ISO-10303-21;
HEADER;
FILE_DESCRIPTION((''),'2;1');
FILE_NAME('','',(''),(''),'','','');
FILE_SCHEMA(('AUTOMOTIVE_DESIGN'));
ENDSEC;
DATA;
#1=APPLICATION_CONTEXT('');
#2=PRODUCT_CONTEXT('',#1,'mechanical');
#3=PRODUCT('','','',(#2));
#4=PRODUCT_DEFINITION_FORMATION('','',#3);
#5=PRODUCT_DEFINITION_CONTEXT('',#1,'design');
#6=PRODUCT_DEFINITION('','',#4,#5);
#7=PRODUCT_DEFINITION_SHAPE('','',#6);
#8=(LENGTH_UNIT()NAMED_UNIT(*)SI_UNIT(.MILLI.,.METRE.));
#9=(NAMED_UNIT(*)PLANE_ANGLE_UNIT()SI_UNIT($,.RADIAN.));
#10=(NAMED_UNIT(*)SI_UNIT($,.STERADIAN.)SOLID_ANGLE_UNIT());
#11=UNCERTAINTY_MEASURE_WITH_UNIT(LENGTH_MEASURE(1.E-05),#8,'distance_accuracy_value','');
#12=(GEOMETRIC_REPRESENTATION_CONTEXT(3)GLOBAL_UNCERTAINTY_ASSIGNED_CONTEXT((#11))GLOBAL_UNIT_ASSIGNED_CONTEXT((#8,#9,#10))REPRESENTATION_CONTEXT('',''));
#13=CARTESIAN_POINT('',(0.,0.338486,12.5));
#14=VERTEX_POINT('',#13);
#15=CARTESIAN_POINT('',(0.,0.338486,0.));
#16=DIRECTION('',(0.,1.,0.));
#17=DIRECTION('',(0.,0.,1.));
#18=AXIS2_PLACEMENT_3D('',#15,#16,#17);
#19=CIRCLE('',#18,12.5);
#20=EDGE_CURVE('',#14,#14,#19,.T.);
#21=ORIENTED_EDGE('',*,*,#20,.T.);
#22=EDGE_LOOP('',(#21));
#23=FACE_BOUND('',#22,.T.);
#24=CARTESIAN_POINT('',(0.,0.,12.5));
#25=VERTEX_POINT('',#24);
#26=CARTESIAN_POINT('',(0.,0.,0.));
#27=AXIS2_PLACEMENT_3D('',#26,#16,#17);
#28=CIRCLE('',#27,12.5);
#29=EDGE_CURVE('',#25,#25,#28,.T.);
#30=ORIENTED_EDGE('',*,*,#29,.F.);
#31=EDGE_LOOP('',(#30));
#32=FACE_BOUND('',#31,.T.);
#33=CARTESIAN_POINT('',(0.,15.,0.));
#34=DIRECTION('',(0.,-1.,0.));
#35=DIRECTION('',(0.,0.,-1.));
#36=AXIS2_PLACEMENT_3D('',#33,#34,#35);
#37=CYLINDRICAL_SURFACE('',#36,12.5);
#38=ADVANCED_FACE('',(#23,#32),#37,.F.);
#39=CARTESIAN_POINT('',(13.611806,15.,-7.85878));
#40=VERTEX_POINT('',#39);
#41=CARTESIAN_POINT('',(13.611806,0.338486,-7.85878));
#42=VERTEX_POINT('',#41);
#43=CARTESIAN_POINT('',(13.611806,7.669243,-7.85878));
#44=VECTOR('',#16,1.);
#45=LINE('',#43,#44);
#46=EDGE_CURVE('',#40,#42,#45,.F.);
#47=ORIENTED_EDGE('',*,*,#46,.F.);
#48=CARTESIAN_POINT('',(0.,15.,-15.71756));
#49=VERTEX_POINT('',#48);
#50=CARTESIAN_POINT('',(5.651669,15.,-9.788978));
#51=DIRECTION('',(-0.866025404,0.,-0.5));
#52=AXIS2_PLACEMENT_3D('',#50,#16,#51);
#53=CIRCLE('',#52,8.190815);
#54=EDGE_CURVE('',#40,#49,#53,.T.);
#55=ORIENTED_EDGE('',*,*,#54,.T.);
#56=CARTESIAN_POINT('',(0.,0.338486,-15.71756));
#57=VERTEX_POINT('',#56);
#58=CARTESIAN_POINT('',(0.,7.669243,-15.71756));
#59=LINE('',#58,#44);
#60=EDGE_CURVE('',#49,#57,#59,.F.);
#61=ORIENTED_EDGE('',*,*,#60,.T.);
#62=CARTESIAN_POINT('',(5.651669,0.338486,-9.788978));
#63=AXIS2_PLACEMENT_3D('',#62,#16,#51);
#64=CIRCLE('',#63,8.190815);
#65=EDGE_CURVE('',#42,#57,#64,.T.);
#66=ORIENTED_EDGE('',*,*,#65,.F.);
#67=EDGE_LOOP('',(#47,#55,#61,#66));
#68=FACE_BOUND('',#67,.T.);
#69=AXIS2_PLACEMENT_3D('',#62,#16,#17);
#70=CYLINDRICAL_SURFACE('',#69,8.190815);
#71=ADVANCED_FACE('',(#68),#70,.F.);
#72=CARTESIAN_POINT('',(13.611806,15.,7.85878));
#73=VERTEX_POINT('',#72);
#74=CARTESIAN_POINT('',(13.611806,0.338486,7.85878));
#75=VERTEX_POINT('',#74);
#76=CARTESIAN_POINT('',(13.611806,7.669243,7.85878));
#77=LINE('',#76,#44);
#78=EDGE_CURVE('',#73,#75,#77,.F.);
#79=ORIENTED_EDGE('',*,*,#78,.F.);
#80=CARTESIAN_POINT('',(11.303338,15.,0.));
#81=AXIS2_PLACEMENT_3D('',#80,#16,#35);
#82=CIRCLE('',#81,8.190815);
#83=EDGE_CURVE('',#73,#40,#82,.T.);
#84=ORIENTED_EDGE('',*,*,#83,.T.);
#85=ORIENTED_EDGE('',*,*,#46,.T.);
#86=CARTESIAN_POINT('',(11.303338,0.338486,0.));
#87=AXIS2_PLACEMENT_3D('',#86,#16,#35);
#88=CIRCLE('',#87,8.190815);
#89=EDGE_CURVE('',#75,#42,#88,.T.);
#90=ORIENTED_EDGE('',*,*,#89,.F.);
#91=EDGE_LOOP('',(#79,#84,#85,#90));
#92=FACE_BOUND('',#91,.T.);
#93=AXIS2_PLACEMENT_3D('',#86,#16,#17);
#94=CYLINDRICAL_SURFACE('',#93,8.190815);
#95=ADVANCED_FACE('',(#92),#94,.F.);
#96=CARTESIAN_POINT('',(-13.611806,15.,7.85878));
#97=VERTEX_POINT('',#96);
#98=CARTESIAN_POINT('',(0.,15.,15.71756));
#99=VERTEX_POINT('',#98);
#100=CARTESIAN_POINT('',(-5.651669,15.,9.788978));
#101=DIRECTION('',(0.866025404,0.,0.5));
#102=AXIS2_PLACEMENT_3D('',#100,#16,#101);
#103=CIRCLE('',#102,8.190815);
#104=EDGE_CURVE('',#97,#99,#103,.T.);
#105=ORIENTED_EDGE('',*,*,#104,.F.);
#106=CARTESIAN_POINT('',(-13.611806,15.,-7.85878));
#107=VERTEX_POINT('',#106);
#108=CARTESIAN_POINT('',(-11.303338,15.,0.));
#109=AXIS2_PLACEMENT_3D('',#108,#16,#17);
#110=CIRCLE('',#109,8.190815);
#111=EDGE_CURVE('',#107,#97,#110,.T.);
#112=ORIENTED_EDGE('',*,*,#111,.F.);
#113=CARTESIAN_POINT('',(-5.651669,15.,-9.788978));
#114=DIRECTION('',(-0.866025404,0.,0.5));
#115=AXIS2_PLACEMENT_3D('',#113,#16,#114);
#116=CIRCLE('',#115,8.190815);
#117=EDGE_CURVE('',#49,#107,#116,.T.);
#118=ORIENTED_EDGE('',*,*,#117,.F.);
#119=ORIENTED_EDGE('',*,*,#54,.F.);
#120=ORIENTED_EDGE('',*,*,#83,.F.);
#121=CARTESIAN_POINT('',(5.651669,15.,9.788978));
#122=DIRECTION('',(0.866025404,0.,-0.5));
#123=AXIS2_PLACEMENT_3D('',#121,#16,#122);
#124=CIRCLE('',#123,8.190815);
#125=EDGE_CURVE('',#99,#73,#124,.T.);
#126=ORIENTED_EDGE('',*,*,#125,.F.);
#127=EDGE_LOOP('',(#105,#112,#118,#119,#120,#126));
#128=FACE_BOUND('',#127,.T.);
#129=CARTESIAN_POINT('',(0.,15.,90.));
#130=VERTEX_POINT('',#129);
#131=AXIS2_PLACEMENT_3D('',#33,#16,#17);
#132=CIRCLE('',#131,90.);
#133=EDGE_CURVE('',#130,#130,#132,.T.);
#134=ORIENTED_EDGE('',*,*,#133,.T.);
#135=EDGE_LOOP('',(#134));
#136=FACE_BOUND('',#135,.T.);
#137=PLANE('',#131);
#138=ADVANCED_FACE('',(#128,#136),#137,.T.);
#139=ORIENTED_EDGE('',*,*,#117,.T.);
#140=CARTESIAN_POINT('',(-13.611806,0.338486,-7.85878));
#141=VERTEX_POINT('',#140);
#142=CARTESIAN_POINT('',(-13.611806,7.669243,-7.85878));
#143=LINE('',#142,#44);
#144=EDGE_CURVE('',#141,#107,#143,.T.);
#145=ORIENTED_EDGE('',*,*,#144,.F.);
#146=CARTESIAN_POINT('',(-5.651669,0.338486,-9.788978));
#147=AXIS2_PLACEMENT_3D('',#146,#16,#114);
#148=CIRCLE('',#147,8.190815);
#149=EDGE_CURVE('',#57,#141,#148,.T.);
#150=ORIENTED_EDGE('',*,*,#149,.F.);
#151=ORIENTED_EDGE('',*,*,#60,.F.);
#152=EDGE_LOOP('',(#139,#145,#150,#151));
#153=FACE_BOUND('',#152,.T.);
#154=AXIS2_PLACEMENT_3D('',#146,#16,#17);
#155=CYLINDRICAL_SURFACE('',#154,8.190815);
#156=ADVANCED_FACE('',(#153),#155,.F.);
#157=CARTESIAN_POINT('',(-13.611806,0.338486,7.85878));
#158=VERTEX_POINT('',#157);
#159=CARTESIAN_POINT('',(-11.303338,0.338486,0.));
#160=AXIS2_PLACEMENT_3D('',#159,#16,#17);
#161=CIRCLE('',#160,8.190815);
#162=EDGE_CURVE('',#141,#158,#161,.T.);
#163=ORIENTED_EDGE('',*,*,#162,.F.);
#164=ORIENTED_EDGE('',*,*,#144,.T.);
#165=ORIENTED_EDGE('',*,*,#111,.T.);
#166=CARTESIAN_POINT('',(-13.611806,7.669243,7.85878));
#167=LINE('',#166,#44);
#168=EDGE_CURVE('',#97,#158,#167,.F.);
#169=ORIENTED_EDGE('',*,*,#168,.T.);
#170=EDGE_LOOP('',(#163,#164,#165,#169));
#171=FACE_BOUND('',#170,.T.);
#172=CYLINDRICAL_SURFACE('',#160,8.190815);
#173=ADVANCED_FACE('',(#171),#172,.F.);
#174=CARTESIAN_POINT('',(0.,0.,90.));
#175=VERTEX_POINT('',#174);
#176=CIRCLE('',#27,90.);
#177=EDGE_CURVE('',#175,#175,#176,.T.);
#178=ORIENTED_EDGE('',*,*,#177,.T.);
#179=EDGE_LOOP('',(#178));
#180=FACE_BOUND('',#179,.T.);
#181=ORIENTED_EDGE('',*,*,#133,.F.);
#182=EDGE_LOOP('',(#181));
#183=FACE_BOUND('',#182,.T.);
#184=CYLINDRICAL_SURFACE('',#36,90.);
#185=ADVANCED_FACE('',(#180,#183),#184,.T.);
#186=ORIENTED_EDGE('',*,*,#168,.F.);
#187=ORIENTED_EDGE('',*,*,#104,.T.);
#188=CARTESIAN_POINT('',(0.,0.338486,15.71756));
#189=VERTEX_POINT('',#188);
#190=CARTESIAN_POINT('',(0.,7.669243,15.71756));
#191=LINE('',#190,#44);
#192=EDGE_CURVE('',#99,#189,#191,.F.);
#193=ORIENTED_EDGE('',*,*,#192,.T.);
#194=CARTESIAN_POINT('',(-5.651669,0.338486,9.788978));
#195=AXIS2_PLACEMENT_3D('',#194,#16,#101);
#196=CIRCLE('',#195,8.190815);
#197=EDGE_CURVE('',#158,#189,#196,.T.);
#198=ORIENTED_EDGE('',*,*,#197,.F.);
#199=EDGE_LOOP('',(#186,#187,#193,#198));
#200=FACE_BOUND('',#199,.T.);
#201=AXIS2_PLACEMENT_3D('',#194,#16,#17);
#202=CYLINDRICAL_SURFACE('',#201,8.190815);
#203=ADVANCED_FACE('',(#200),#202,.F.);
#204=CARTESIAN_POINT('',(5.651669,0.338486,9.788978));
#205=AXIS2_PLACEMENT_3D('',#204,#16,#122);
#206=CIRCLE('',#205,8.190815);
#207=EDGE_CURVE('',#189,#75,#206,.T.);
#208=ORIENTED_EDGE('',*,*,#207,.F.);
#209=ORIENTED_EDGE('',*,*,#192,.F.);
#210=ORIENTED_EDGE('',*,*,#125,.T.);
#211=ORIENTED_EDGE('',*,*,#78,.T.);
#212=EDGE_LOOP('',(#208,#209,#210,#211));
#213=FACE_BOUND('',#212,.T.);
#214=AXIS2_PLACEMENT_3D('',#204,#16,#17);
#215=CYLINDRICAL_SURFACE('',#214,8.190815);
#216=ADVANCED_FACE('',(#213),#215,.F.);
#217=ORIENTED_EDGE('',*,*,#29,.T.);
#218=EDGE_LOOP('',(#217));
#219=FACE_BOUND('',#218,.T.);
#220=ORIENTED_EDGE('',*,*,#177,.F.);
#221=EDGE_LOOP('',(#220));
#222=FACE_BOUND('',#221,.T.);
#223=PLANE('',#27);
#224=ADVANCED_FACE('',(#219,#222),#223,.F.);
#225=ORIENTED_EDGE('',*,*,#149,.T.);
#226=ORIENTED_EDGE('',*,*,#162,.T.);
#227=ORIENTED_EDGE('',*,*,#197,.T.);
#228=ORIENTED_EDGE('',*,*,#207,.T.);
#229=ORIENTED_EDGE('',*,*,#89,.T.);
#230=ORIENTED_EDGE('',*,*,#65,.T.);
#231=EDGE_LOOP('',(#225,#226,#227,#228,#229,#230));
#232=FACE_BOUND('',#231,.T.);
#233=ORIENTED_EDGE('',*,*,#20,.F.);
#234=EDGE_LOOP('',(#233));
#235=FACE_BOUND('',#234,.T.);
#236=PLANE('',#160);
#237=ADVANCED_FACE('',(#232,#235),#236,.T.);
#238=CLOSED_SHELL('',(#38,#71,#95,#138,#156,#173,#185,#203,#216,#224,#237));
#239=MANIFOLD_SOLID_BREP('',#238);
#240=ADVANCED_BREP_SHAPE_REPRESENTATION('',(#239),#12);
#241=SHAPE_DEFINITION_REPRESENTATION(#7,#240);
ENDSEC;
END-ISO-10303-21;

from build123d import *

# Parameters (mm, degrees)
SKETCH1_R           = 90
BOSS_EXTRUDE1_DEPTH = 15
SKETCH2_R           = 12.5
CUT_EXTRUDE1_DEPTH  = 129.16005618
SKETCH3_R           = 8.190815025
CUT_EXTRUDE2_DEPTH  = 14.66151422
CIRPATTERN1_COUNT   = 6


with BuildPart() as part:
    # Sketch1 → Boss-Extrude1 (new body)
    with BuildSketch(Plane(origin=(0, 0, 0), x_dir=(1, 0, 0), z_dir=(0, 1, 0))):
        Circle(SKETCH1_R)
    extrude(amount=BOSS_EXTRUDE1_DEPTH)

    # Sketch2 → Cut-Extrude1 (cut, through all)
    with BuildSketch(Plane(origin=(0, 0, 0), x_dir=(1, 0, 0), z_dir=(0, 1, 0))):
        Circle(SKETCH2_R)
    extrude(amount=CUT_EXTRUDE1_DEPTH, mode=Mode.SUBTRACT)

    # Sketch3 → Cut-Extrude2 (cut)
    with BuildSketch(Plane(origin=(0, 15, 0), x_dir=(1, 0, 0), z_dir=(0, 1, 0))):
        with Locations((-11.303338173, 0)):
            Circle(SKETCH3_R)
    cut_extrude2 = extrude(amount=-CUT_EXTRUDE2_DEPTH, mode=Mode.SUBTRACT)

    # CirPattern1: Cut-Extrude2 ×6 about axis
    cirpattern1_axis = Axis((0, 0, 0), (0, 1, 0))
    for i in range(1, CIRPATTERN1_COUNT):
        add(cut_extrude2.rotate(cirpattern1_axis, i * 360 / CIRPATTERN1_COUNT), mode=Mode.SUBTRACT)


solid = part.part
